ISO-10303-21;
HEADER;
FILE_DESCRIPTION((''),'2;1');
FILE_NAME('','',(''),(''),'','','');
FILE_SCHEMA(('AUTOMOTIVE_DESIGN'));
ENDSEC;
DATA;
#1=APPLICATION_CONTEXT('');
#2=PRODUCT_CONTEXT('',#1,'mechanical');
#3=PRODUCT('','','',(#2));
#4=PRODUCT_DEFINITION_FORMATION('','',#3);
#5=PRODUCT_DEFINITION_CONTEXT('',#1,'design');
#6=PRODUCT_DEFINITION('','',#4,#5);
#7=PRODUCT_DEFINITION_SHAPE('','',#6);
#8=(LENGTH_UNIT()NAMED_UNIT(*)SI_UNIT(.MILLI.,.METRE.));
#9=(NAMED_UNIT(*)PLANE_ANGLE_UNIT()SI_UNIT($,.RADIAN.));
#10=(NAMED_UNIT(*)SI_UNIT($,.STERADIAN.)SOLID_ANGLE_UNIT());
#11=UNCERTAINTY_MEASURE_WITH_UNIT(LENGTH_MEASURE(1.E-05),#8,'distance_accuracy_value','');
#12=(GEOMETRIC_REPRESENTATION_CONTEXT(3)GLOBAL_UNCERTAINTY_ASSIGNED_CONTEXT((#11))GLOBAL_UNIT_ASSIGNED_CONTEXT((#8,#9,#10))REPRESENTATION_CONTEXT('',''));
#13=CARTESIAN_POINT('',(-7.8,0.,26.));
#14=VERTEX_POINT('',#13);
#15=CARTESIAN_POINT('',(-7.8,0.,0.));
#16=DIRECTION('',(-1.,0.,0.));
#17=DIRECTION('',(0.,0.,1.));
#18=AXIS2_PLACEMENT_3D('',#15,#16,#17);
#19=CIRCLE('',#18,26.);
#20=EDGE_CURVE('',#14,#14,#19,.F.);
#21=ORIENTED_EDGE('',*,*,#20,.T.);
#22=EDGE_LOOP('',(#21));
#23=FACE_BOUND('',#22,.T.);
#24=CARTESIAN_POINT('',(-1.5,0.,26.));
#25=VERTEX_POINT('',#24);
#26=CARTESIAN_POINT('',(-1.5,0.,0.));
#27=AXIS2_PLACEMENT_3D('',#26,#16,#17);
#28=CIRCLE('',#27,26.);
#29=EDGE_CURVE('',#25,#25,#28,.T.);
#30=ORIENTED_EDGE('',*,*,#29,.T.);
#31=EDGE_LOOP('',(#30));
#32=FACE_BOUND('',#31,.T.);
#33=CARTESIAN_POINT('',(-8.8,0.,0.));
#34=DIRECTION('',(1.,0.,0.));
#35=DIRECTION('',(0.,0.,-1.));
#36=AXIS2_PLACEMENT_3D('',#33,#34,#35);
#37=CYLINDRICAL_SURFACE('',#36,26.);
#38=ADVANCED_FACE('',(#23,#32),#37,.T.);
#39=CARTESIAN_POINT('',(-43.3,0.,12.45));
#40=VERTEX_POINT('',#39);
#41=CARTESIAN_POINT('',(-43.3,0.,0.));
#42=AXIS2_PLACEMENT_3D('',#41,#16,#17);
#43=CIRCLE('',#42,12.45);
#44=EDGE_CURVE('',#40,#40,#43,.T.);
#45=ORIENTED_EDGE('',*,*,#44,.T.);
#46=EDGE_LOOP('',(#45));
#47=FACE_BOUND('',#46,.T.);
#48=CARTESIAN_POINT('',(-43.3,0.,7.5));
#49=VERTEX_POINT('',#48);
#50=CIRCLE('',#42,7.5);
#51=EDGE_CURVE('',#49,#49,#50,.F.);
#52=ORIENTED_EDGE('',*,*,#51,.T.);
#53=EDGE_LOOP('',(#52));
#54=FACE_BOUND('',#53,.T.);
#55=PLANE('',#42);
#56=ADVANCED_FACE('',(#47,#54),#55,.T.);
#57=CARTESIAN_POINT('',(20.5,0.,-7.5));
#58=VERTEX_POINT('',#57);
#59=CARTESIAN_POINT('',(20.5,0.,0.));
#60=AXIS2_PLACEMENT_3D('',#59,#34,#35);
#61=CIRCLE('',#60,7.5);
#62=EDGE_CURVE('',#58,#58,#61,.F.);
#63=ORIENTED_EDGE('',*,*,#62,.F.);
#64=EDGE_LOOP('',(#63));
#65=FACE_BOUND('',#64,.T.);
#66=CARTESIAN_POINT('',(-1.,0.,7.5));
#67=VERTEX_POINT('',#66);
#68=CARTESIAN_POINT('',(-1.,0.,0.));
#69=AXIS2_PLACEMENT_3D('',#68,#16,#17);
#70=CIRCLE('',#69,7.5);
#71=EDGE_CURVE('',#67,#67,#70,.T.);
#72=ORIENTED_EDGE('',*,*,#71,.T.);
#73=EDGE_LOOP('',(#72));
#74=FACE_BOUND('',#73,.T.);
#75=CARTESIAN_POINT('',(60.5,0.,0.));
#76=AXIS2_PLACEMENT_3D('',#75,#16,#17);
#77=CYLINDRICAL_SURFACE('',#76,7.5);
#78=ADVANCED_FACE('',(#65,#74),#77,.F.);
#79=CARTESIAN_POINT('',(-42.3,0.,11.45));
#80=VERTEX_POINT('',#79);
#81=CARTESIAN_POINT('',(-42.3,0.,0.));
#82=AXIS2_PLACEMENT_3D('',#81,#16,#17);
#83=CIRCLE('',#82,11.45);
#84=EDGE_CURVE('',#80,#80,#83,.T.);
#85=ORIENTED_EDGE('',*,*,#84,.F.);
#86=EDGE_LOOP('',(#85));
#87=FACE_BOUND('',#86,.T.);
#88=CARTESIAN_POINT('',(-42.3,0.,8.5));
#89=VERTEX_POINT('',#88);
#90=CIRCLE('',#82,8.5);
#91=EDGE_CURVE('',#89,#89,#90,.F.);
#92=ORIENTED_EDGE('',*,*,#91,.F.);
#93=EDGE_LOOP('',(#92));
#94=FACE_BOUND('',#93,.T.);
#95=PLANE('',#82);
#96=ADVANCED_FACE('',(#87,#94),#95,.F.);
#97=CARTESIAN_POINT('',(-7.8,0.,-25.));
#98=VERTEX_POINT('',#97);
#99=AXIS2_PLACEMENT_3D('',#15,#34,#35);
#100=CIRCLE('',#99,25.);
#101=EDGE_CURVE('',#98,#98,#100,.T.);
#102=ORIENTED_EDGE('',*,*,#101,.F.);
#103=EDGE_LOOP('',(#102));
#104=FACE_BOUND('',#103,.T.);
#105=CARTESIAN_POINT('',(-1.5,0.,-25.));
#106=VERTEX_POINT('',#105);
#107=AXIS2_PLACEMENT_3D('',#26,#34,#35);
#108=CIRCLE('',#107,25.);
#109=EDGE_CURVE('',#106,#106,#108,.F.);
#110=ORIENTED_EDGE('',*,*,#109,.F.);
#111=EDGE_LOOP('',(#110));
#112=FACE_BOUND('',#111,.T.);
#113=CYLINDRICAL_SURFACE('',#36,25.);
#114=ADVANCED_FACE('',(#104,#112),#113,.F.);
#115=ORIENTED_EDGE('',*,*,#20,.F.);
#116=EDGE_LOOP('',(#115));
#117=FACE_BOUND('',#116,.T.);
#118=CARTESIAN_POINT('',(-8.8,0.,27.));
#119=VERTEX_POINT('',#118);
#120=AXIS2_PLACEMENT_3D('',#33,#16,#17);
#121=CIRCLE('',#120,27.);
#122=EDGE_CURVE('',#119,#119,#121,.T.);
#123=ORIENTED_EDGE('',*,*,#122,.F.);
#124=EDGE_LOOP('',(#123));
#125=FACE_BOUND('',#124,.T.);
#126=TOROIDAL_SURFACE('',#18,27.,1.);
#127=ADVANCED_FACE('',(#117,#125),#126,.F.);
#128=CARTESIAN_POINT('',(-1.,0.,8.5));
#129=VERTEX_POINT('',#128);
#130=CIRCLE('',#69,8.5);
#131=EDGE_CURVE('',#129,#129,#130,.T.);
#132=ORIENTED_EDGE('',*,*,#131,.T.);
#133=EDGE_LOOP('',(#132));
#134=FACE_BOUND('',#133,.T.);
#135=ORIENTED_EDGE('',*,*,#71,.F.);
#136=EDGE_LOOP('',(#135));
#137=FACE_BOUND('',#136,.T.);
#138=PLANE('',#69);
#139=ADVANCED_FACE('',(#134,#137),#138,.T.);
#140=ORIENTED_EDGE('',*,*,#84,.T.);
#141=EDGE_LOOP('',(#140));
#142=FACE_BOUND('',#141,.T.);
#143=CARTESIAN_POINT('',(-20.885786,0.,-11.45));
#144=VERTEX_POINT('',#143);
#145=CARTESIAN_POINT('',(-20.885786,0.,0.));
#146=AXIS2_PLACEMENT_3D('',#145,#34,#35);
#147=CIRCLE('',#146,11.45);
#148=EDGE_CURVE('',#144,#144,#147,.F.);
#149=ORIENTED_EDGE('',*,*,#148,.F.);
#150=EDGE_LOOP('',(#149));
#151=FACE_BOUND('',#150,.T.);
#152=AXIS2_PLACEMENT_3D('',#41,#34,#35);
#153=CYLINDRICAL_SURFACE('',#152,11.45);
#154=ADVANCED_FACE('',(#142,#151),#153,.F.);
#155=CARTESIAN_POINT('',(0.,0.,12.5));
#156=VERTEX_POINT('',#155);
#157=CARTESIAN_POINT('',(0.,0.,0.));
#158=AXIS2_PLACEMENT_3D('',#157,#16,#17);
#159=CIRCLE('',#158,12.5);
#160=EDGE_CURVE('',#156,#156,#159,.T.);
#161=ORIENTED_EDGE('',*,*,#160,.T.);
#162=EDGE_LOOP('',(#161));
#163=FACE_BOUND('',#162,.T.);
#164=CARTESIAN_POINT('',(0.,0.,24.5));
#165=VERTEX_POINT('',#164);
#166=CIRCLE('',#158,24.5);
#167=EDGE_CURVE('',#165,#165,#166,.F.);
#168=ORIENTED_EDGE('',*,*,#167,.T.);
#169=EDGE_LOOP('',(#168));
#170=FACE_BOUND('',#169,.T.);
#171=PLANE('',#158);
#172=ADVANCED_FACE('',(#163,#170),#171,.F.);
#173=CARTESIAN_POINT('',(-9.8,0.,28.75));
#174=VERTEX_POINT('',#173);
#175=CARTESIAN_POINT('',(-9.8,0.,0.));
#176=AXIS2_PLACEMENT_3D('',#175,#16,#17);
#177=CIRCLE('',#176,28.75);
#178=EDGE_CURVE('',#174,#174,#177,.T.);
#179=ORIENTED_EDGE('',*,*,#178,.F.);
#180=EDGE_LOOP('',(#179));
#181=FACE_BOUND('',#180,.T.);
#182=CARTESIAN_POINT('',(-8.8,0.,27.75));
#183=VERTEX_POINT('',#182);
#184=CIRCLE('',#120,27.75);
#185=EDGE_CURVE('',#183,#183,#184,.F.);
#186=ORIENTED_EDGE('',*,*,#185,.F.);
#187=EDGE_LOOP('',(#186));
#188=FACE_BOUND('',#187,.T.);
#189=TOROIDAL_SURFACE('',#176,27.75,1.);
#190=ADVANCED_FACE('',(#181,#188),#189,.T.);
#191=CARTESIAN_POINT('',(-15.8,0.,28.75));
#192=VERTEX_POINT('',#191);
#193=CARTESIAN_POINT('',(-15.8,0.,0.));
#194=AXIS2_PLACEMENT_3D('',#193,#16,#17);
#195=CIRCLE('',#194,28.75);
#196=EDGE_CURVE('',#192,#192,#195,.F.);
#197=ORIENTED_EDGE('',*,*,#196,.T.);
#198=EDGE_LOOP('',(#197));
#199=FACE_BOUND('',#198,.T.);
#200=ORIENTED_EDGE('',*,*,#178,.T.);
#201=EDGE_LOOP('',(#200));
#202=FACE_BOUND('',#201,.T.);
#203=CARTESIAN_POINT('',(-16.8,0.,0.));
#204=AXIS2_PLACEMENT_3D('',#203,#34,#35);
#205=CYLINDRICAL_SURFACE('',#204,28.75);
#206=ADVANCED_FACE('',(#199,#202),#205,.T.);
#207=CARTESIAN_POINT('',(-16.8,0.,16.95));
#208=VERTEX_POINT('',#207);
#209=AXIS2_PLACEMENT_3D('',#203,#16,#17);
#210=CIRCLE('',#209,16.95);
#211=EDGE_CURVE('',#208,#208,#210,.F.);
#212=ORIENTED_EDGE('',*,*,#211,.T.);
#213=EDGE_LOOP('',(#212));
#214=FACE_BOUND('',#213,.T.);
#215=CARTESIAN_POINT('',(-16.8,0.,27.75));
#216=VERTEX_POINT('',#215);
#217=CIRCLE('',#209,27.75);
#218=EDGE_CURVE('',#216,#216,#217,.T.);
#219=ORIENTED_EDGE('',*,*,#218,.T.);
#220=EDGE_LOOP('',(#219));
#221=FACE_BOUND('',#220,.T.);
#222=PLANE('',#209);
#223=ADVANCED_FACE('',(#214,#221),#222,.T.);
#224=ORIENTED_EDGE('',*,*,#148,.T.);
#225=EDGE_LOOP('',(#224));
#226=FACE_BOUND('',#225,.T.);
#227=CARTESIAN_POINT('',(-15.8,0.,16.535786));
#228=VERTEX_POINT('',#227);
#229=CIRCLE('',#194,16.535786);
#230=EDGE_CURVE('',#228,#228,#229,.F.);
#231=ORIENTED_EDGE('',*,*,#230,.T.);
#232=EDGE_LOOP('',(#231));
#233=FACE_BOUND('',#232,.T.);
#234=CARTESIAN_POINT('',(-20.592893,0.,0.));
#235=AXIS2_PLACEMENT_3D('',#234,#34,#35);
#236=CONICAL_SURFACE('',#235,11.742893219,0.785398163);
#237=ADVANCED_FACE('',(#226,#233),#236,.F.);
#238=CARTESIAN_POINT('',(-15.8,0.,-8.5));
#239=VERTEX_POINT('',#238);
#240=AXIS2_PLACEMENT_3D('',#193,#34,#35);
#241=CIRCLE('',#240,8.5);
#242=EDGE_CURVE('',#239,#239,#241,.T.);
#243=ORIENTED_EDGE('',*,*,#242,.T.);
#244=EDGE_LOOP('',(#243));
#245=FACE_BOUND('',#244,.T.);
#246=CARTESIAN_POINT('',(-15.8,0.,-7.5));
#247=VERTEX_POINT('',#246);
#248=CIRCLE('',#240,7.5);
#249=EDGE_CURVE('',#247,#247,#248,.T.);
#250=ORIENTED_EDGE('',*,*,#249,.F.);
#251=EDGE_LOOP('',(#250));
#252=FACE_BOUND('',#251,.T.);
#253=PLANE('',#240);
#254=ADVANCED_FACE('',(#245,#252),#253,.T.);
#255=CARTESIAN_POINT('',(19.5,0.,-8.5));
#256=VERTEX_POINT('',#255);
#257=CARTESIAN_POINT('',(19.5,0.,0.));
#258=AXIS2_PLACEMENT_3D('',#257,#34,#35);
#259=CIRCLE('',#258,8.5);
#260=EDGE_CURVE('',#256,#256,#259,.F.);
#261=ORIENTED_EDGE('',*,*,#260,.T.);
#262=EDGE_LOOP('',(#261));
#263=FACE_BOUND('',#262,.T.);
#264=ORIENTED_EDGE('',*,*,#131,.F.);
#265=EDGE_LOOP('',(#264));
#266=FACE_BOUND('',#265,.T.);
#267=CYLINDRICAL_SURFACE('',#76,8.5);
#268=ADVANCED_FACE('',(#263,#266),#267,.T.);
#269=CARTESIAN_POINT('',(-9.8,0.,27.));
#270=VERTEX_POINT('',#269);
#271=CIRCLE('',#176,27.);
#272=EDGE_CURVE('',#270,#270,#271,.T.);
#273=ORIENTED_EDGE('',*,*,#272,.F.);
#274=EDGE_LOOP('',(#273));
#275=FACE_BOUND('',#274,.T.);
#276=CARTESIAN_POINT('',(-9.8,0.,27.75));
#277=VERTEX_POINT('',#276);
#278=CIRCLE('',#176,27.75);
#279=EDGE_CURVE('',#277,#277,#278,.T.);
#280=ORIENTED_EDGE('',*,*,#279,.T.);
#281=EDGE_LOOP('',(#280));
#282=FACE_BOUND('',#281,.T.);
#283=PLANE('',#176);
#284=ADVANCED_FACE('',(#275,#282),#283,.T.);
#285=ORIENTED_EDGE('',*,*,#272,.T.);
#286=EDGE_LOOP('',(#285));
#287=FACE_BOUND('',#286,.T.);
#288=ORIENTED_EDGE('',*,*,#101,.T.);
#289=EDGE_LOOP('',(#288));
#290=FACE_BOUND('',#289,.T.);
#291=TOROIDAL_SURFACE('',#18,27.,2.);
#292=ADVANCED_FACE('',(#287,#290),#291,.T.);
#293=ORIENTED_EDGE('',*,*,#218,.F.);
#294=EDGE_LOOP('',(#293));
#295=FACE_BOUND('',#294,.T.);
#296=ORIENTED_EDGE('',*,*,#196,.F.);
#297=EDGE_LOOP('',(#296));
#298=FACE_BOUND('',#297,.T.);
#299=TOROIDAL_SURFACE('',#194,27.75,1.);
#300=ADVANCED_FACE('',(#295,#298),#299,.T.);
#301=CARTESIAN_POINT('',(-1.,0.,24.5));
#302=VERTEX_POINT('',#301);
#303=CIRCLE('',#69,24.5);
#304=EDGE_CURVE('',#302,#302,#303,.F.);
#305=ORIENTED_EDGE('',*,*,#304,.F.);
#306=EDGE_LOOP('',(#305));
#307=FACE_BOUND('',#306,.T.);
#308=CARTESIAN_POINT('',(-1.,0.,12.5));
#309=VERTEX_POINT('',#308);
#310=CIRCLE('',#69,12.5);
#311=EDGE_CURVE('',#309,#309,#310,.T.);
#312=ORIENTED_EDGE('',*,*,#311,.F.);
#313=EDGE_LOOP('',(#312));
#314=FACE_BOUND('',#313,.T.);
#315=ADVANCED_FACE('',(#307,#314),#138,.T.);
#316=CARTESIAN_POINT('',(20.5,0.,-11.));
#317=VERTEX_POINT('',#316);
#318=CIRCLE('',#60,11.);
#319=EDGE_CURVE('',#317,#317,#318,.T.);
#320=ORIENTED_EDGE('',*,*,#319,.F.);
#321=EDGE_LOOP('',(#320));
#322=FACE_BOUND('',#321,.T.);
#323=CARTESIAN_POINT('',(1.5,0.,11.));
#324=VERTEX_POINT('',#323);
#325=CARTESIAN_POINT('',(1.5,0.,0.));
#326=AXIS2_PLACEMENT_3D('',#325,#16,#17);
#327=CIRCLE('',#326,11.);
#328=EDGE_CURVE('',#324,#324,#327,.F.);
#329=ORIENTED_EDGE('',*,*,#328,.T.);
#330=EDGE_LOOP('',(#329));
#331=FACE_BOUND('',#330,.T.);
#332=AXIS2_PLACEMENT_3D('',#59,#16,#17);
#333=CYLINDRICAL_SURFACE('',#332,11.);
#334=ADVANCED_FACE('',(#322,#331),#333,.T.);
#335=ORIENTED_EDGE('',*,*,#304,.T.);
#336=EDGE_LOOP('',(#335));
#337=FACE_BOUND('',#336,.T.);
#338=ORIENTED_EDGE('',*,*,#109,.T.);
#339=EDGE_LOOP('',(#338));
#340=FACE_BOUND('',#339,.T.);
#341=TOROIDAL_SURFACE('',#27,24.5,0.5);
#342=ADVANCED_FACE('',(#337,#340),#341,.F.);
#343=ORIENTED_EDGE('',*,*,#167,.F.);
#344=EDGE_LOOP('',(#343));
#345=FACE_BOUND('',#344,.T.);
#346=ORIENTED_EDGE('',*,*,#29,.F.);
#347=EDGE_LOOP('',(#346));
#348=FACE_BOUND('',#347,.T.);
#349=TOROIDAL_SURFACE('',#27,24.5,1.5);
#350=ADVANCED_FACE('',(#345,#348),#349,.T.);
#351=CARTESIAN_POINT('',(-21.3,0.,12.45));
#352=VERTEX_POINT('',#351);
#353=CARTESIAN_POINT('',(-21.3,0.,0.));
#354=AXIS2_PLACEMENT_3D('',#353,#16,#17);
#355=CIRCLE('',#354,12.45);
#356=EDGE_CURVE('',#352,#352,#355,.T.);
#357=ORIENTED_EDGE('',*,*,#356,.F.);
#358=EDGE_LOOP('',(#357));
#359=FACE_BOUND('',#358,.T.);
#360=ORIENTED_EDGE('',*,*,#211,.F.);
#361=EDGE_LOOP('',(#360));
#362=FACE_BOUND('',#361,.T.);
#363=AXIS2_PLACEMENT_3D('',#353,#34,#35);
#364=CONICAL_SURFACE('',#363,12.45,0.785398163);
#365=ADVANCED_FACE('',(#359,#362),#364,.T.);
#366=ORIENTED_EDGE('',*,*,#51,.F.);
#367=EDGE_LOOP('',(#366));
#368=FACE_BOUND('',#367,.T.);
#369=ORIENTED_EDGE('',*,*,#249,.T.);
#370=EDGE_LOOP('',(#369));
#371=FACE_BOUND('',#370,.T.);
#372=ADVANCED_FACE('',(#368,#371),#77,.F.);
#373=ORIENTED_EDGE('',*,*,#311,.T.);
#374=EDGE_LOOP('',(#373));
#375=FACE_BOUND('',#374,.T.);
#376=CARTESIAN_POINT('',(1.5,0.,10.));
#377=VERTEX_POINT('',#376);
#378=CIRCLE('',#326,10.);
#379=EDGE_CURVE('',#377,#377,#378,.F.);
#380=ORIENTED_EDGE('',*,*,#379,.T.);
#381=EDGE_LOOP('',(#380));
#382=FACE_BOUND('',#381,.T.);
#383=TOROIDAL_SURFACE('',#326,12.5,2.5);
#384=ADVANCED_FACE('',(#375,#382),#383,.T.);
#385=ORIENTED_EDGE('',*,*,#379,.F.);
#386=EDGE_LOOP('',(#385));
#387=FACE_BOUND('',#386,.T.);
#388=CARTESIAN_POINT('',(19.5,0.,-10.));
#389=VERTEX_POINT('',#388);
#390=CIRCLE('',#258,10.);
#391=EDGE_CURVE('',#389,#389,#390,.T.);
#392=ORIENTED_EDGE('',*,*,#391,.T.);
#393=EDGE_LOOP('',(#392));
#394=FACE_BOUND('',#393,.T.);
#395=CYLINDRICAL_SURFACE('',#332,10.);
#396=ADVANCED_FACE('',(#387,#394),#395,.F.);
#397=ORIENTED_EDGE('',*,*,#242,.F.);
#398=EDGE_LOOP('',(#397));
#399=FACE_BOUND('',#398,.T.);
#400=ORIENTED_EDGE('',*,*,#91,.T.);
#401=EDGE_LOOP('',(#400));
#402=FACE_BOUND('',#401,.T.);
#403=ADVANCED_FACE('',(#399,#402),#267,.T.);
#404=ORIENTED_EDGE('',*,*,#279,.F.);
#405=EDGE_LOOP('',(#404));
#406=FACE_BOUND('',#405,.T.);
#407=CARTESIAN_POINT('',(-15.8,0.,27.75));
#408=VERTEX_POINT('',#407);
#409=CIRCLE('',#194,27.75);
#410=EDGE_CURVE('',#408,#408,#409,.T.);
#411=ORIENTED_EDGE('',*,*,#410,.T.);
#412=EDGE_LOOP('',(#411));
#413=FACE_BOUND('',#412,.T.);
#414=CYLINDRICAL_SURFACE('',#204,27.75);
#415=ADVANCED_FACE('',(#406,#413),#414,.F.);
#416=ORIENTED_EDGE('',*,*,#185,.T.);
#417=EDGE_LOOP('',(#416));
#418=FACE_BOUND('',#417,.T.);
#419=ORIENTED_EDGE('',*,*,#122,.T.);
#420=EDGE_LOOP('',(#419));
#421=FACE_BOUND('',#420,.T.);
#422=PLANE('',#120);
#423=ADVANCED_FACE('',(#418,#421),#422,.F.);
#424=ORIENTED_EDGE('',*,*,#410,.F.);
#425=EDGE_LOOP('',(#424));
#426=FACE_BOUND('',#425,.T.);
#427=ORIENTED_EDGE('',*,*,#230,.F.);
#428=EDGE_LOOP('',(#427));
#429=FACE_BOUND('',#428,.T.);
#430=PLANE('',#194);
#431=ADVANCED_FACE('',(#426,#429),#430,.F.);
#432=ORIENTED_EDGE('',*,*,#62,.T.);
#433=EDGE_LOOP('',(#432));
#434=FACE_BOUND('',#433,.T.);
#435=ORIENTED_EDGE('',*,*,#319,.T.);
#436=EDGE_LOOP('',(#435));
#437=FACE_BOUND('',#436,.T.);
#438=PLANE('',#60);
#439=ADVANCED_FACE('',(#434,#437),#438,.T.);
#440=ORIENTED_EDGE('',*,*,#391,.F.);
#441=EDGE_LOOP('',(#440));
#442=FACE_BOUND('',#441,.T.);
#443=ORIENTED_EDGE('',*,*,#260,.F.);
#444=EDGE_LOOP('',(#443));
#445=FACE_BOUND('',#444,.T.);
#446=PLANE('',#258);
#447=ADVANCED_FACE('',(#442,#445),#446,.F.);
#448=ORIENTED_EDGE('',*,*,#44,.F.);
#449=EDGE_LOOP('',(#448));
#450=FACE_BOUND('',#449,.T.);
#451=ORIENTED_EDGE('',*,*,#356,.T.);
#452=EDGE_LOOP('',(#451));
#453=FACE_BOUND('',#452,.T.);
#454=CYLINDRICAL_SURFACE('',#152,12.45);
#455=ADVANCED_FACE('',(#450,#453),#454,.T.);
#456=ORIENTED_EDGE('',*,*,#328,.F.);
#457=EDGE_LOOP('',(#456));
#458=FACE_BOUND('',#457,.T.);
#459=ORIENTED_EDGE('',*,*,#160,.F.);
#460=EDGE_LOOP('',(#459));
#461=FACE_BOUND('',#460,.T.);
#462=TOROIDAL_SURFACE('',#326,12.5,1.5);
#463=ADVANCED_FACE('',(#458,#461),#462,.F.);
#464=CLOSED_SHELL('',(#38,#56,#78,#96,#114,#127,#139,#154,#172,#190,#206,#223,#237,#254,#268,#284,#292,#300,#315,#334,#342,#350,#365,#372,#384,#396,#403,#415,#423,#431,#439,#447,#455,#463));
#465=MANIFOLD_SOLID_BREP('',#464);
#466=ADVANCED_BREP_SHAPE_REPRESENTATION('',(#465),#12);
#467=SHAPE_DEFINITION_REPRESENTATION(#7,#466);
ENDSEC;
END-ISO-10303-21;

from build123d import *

# Parameters (mm, degrees)
CROQUIS1_R                 = 11
SALIENTE_EXTRUIR1_DEPTH    = 20.5
CROQUIS2_R                 = 26
SALIENTE_EXTRUIR2_DEPTH    = 8.8
CROQUIS3_R                 = 28.75
SALIENTE_EXTRUIR3_DEPTH    = 8
CROQUIS4_R                 = 12.45
SALIENTE_EXTRUIR4_DEPTH    = 26.5
REDONDEO1_R                = 1.5
REDONDEO2_R                = 1.5
REDONDEO3_R                = 1
REDONDEO4_R                = 1
CHAFL_N1_SIZE              = 4.5
CORTAR_EXTRUIR1_DEPTH      = 40
CORTAR_EXTRUIR1_DEPTH_BACK = 82.5
CROQUIS5_R                 = 7.5
CROQUIS8_R                 = 19.032957951
CORTAR_EXTRUIR3_DEPTH      = 14.8


# Read off the part's stored shape, not the designer's step: Vaciado3
with BuildPart() as part:
    # Croquis1 → Saliente-Extruir1 (new body)
    with BuildSketch(Plane(origin=(0, 0, 0), x_dir=(0, 0, -1), z_dir=(1, 0, 0))):
        Circle(CROQUIS1_R)
    extrude(amount=SALIENTE_EXTRUIR1_DEPTH)

    # Croquis2 → Saliente-Extruir2 (add)
    with BuildSketch(Plane.ZY):
        Circle(CROQUIS2_R)
    extrude(amount=SALIENTE_EXTRUIR2_DEPTH)

    # Croquis3 → Saliente-Extruir3 (add)
    with BuildSketch(Plane.ZY.offset(8.8)):
        Circle(CROQUIS3_R)
    extrude(amount=SALIENTE_EXTRUIR3_DEPTH)

    # Croquis4 → Saliente-Extruir4 (add)
    with BuildSketch(Plane.ZY.offset(16.8)):
        Circle(CROQUIS4_R)
    extrude(amount=SALIENTE_EXTRUIR4_DEPTH)

    # Redondeo1
    redondeo1_edges = [part.edges().sort_by_distance(p)[0] for p in [
        (0, 0, 11),
    ]]
    fillet(redondeo1_edges, radius=REDONDEO1_R)

    # Redondeo2
    redondeo2_edges = [part.edges().sort_by_distance(p)[0] for p in [
        (0, 0, -26),
    ]]
    fillet(redondeo2_edges, radius=REDONDEO2_R)

    # Redondeo3
    redondeo3_edges = [part.edges().sort_by_distance(p)[0] for p in [
        (-8.8, 0, -26),
    ]]
    fillet(redondeo3_edges, radius=REDONDEO3_R)

    # Redondeo4
    redondeo4_edges = [part.edges().sort_by_distance(p)[0] for p in [
        (-16.8, 0, -28.75),
        (-8.8, 0, -28.75),
    ]]
    fillet(redondeo4_edges, radius=REDONDEO4_R)

    # Chaflán1
    chafl_n1_edges = [part.edges().sort_by_distance(p)[0] for p in [
        (-16.8, 0, -12.45),
    ]]
    chamfer(chafl_n1_edges, length=CHAFL_N1_SIZE)

    # Croquis5 → Cortar-Extruir1 (cut, two sides: drawn at the far end of the back side and taken through both)
    with BuildSketch(Plane(origin=(20.5, 0, 0), x_dir=(0, 0, -1), z_dir=(1, 0, 0)).offset(-CORTAR_EXTRUIR1_DEPTH_BACK)):
        with Locations(Location((0, 0, 0), (0, 0, 180))):
            Circle(CROQUIS5_R)
    extrude(amount=CORTAR_EXTRUIR1_DEPTH + CORTAR_EXTRUIR1_DEPTH_BACK, mode=Mode.SUBTRACT)

    # Vaciado3 outline → Vaciado3 (revolve, cut)
    with BuildSketch(Plane.YX):
        with BuildLine():
            Line((10, 1.5), (10, 19.5))
            Line((10, 19.5), (8.5, 19.5))
            Line((8.5, 19.5), (8.5, -42.3))
            Line((8.5, -42.3), (11.45, -42.3))
            Line((11.45, -42.3), (11.45, -20.885786438))
            Line((11.45, -20.885786438), (16.535786438, -15.8))
            Line((16.535786438, -15.8), (27.75, -15.8))
            Line((27.75, -15.8), (27.75, -9.8))
            Line((27.75, -9.8), (27, -9.8))
            ThreePointArc((27, -9.8), (25.585786438, -9.214213562), (25, -7.8))
            Line((25, -7.8), (25, -1.5))
            ThreePointArc((25, -1.5), (24.853553391, -1.146446609), (24.5, -1))
            Line((24.5, -1), (12.5, -1))
            ThreePointArc((12.5, -1), (10.732233047, -0.267766953), (10, 1.5))
        make_face()
    revolve(axis=Axis((0, 0, 0), (1, 0, 0)), mode=Mode.SUBTRACT)

    # Croquis8 → Cortar-Extruir3 (cut)
    with BuildSketch(Plane(origin=(-15.8, 0, 0), x_dir=(0, 0, -1), z_dir=(1, 0, 0))):
        Circle(CROQUIS8_R)
    extrude(amount=CORTAR_EXTRUIR3_DEPTH, mode=Mode.SUBTRACT)


solid = part.part
